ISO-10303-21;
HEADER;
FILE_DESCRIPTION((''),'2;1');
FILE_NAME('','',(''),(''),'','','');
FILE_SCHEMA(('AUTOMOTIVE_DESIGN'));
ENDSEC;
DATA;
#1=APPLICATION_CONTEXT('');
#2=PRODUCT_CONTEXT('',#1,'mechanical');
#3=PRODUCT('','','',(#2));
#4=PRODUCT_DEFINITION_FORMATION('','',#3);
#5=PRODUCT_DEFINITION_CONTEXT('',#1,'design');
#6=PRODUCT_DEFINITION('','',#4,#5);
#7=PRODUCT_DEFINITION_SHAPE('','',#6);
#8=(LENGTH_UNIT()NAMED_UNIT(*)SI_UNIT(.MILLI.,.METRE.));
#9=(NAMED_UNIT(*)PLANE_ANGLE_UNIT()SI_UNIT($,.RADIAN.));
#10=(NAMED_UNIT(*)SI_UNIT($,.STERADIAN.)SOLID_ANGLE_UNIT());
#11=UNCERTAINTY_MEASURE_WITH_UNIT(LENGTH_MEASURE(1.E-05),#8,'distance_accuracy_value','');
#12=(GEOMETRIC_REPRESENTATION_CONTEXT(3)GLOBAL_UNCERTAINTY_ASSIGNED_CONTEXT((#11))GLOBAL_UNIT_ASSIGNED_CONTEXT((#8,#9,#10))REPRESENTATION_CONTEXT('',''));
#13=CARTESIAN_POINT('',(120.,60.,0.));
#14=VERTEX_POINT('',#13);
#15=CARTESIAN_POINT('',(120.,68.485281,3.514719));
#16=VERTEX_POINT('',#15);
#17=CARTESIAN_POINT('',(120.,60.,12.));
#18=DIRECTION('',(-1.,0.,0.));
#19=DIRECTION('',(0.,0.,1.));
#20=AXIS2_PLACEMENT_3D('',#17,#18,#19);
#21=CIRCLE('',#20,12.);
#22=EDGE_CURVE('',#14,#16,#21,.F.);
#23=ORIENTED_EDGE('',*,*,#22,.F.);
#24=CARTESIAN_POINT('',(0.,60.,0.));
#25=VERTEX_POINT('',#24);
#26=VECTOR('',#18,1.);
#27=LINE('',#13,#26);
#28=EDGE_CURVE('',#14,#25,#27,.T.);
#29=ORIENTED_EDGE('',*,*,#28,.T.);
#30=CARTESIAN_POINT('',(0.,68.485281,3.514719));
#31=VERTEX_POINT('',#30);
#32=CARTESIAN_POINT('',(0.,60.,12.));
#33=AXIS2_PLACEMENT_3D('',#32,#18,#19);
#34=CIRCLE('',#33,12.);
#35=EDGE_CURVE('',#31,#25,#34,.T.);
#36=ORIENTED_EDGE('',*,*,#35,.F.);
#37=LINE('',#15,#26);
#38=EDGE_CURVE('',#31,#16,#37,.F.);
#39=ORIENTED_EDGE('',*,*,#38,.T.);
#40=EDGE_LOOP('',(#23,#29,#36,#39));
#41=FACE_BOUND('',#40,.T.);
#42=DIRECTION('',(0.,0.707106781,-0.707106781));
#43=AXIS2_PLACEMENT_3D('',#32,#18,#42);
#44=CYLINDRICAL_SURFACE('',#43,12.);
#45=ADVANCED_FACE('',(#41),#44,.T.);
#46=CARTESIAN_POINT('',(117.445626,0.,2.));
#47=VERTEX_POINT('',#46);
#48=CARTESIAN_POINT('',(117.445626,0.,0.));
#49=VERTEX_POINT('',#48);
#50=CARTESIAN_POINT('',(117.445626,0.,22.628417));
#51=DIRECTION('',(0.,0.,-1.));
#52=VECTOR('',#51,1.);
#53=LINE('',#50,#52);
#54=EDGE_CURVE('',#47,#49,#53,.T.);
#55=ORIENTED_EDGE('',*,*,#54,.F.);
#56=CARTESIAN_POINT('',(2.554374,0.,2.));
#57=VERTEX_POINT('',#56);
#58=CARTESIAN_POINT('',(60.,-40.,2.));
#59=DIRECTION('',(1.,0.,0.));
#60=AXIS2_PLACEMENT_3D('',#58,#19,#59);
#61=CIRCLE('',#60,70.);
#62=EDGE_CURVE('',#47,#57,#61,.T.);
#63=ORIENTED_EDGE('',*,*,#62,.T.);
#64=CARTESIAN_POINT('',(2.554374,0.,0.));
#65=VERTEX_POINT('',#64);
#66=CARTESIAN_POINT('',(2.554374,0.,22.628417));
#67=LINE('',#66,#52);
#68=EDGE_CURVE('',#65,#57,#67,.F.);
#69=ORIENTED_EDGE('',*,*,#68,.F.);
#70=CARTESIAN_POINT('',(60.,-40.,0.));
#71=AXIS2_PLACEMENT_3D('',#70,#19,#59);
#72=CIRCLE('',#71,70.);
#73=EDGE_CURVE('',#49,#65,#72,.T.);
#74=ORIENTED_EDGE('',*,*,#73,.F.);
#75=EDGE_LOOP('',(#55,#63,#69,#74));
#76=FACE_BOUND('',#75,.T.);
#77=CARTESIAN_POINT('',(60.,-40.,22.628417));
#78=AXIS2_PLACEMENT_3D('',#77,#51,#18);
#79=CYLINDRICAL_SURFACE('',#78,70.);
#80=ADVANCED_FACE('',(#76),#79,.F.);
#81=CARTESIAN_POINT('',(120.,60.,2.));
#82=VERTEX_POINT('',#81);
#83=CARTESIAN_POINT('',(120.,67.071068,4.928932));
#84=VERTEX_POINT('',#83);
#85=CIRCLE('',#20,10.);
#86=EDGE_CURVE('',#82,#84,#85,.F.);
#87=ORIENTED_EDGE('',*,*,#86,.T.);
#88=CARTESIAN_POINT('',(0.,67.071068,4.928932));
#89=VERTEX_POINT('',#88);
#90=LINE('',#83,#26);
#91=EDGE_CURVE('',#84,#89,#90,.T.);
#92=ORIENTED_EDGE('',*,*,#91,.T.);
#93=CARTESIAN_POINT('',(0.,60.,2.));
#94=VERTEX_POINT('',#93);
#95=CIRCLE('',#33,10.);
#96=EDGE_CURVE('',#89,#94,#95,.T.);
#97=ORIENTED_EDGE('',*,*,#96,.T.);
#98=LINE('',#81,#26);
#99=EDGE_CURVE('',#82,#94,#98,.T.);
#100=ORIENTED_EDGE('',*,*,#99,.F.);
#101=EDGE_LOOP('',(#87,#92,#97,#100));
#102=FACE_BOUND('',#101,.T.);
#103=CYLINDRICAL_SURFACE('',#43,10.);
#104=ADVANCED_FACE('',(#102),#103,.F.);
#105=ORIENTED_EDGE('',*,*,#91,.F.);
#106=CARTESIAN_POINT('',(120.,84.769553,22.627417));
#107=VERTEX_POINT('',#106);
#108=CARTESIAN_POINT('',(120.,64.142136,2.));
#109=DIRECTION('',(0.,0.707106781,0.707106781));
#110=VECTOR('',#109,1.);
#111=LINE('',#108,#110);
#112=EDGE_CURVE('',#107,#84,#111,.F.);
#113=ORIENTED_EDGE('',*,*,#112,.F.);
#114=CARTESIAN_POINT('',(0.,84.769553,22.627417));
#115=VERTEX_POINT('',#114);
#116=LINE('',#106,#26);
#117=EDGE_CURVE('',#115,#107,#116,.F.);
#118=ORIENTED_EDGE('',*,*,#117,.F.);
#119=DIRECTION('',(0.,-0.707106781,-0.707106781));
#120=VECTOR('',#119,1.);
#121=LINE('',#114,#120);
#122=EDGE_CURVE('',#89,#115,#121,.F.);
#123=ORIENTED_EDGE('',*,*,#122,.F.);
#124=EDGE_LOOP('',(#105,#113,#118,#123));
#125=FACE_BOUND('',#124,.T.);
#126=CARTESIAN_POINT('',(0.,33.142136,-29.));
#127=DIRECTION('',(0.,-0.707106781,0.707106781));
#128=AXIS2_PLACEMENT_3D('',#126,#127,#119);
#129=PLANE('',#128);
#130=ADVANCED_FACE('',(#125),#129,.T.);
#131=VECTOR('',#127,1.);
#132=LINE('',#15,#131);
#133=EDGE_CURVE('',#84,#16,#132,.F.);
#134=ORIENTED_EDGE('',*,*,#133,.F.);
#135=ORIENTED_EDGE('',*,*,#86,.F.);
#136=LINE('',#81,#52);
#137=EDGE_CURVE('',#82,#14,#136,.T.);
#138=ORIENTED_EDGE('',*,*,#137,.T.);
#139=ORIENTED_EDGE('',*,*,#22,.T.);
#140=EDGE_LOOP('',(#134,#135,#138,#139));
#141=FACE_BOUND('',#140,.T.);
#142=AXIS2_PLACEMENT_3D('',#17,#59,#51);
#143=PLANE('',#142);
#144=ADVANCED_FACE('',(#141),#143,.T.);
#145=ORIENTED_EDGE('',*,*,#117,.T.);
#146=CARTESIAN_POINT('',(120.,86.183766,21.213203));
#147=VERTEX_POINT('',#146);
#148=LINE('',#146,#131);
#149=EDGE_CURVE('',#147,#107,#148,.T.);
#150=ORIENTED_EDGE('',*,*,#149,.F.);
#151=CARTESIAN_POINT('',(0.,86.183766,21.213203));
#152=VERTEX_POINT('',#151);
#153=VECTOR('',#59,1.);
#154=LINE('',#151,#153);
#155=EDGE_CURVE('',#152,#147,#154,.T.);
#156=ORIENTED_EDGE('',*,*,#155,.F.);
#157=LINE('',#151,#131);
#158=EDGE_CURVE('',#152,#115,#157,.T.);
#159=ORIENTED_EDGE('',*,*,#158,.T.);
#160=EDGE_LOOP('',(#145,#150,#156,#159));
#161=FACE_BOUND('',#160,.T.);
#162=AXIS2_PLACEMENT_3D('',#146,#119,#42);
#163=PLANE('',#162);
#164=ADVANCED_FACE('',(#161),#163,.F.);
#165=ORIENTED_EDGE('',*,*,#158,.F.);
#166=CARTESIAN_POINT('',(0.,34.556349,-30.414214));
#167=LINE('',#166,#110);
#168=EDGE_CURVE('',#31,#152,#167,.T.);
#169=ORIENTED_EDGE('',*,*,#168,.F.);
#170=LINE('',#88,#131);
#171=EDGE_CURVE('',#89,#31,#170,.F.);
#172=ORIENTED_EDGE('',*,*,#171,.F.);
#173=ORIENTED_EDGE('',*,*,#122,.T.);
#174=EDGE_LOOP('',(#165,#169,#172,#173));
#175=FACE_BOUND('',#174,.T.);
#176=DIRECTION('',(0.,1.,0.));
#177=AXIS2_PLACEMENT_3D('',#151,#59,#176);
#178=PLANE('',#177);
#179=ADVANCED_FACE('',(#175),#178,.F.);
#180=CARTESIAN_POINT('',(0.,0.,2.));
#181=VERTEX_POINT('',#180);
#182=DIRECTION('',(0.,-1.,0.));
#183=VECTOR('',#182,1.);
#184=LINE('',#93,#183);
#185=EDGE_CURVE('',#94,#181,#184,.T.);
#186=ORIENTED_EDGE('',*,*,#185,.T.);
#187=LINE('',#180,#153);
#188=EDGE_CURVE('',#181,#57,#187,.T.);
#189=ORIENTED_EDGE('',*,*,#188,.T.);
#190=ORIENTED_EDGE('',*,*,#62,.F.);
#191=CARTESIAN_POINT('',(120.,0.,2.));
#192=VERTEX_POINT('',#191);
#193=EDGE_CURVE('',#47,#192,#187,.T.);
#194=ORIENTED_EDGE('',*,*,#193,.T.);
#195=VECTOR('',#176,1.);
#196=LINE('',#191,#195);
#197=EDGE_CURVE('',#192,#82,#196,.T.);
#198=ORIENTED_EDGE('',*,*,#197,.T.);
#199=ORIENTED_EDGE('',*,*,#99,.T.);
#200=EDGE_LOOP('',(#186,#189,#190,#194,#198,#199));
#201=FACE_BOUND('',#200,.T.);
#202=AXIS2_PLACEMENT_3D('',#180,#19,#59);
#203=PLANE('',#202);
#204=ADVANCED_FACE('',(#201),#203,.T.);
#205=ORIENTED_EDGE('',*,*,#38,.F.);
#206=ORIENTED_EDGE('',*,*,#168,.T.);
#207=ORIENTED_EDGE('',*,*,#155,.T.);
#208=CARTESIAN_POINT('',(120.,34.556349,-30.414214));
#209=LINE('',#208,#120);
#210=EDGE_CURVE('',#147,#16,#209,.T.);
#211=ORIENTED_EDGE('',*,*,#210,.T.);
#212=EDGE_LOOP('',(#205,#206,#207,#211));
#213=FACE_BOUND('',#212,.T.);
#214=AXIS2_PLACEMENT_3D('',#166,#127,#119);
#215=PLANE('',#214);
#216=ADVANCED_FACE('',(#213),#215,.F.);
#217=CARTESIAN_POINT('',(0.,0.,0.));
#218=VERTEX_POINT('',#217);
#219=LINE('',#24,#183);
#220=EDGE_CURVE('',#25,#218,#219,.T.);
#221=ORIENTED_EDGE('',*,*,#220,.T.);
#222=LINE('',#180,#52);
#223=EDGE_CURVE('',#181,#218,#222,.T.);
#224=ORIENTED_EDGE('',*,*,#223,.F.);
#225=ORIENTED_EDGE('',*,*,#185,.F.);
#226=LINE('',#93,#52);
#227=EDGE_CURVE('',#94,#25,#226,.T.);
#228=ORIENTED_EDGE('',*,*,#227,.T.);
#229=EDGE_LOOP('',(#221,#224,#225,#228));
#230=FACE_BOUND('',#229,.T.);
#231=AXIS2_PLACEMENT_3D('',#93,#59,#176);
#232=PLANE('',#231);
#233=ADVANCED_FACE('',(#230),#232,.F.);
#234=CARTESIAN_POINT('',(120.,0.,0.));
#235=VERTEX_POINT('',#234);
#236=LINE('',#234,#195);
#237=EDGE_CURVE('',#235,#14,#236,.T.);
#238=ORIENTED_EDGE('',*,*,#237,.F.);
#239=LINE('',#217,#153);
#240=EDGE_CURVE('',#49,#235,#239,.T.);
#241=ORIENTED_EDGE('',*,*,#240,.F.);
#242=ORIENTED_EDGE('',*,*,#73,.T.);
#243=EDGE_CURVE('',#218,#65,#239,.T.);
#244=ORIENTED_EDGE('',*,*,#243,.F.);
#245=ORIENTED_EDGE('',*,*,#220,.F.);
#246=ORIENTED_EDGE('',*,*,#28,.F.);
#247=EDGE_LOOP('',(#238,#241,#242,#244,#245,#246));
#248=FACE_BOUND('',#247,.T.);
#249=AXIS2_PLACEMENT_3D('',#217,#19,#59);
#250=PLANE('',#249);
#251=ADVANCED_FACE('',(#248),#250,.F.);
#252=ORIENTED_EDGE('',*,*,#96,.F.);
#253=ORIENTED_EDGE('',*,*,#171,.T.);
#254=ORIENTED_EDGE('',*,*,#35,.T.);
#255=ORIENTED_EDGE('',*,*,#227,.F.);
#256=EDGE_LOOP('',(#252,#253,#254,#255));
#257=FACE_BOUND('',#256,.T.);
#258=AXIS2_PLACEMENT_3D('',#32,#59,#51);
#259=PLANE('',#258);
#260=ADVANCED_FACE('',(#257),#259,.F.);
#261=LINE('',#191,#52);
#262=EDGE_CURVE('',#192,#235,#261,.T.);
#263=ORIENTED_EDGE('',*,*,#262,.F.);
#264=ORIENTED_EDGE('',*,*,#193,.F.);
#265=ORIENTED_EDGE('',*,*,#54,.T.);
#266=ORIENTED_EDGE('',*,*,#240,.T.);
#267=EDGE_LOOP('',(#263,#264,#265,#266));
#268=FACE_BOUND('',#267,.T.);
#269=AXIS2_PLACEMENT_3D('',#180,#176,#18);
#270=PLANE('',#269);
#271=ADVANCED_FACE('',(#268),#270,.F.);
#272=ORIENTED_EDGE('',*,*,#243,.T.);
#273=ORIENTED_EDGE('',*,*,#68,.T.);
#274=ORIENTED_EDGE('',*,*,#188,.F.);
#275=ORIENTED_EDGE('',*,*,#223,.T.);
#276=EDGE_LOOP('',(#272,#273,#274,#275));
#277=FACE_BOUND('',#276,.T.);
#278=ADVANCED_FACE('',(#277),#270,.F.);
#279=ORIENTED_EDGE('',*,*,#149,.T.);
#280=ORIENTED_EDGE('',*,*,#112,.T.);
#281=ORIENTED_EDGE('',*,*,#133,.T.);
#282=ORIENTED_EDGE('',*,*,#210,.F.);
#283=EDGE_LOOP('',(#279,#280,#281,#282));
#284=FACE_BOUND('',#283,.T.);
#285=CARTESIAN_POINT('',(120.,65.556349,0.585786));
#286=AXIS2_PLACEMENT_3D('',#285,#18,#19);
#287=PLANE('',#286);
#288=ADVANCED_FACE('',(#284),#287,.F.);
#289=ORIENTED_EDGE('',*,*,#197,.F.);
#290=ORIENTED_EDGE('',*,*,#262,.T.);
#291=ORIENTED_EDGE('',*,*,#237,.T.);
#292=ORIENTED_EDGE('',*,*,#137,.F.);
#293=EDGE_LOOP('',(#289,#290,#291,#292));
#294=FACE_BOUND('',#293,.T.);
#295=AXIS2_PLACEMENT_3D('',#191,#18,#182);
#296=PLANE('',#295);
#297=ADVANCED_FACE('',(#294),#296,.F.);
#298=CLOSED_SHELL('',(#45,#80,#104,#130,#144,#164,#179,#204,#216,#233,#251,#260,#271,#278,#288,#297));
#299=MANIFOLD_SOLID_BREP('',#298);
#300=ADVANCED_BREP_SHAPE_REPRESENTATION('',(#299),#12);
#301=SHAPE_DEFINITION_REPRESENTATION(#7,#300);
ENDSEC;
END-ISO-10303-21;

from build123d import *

# Parameters (mm, degrees)
SKETCH_2_W             = 120
SKETCH_2_H             = 60
SM_BASE_FLANGE_1_DEPTH = 2
SM_EDGE_FLANGE_1_DEPTH = 120
CUT_EXTRUDE_3_REACH    = 151.465
SKETCH_3_R             = 70


# Sheet-metal steps are written as plain solids
with BuildPart() as part:
    # Sketch 2 → Базовая кромка1 (new body)
    with BuildSketch(Plane.XY):
        with Locations((60, 30)):
            Rectangle(SKETCH_2_W, SKETCH_2_H)
    extrude(amount=SM_BASE_FLANGE_1_DEPTH)

    # Ребро-кромка1 section (across the edge) → Ребро-кромка1 (add)
    with BuildSketch(Plane(origin=(120, 64.142135624, 2), x_dir=(0, -0.7071067811865438, 0.7071067811865512), z_dir=(-1, 0, 0))):
        with BuildLine():
            Line((-2, 4.142135624), (-2, 29.171572875))
            Line((-2, 29.171572875), (0, 29.171572875))
            Line((0, 29.171572875), (0, 4.142135624))
            ThreePointArc((0, 4.142135624), (0.761204675, 0.3153013), (2.928932188, -2.928932188))
            Line((2.928932188, -2.928932188), (1.514718626, -4.343145751))
            ThreePointArc((1.514718626, -4.343145751), (-1.08655439, -0.450065565), (-2, 4.142135624))
        make_face()
    extrude(amount=SM_EDGE_FLANGE_1_DEPTH)

    # Эскиз3 → Вырез-Вытянуть3 (cut, up to next)
    with BuildSketch(Plane.XY, mode=Mode.PRIVATE) as cut_extrude_3_sk1:
        with Locations((60, -40)):
            Circle(SKETCH_3_R)
    cut_extrude_3_tool1 = extrude(cut_extrude_3_sk1.sketch, amount=CUT_EXTRUDE_3_REACH, mode=Mode.PRIVATE) & part.part
    add(cut_extrude_3_tool1.solids().sort_by_distance((60, -40, 0))[0], mode=Mode.SUBTRACT)


solid = part.part
